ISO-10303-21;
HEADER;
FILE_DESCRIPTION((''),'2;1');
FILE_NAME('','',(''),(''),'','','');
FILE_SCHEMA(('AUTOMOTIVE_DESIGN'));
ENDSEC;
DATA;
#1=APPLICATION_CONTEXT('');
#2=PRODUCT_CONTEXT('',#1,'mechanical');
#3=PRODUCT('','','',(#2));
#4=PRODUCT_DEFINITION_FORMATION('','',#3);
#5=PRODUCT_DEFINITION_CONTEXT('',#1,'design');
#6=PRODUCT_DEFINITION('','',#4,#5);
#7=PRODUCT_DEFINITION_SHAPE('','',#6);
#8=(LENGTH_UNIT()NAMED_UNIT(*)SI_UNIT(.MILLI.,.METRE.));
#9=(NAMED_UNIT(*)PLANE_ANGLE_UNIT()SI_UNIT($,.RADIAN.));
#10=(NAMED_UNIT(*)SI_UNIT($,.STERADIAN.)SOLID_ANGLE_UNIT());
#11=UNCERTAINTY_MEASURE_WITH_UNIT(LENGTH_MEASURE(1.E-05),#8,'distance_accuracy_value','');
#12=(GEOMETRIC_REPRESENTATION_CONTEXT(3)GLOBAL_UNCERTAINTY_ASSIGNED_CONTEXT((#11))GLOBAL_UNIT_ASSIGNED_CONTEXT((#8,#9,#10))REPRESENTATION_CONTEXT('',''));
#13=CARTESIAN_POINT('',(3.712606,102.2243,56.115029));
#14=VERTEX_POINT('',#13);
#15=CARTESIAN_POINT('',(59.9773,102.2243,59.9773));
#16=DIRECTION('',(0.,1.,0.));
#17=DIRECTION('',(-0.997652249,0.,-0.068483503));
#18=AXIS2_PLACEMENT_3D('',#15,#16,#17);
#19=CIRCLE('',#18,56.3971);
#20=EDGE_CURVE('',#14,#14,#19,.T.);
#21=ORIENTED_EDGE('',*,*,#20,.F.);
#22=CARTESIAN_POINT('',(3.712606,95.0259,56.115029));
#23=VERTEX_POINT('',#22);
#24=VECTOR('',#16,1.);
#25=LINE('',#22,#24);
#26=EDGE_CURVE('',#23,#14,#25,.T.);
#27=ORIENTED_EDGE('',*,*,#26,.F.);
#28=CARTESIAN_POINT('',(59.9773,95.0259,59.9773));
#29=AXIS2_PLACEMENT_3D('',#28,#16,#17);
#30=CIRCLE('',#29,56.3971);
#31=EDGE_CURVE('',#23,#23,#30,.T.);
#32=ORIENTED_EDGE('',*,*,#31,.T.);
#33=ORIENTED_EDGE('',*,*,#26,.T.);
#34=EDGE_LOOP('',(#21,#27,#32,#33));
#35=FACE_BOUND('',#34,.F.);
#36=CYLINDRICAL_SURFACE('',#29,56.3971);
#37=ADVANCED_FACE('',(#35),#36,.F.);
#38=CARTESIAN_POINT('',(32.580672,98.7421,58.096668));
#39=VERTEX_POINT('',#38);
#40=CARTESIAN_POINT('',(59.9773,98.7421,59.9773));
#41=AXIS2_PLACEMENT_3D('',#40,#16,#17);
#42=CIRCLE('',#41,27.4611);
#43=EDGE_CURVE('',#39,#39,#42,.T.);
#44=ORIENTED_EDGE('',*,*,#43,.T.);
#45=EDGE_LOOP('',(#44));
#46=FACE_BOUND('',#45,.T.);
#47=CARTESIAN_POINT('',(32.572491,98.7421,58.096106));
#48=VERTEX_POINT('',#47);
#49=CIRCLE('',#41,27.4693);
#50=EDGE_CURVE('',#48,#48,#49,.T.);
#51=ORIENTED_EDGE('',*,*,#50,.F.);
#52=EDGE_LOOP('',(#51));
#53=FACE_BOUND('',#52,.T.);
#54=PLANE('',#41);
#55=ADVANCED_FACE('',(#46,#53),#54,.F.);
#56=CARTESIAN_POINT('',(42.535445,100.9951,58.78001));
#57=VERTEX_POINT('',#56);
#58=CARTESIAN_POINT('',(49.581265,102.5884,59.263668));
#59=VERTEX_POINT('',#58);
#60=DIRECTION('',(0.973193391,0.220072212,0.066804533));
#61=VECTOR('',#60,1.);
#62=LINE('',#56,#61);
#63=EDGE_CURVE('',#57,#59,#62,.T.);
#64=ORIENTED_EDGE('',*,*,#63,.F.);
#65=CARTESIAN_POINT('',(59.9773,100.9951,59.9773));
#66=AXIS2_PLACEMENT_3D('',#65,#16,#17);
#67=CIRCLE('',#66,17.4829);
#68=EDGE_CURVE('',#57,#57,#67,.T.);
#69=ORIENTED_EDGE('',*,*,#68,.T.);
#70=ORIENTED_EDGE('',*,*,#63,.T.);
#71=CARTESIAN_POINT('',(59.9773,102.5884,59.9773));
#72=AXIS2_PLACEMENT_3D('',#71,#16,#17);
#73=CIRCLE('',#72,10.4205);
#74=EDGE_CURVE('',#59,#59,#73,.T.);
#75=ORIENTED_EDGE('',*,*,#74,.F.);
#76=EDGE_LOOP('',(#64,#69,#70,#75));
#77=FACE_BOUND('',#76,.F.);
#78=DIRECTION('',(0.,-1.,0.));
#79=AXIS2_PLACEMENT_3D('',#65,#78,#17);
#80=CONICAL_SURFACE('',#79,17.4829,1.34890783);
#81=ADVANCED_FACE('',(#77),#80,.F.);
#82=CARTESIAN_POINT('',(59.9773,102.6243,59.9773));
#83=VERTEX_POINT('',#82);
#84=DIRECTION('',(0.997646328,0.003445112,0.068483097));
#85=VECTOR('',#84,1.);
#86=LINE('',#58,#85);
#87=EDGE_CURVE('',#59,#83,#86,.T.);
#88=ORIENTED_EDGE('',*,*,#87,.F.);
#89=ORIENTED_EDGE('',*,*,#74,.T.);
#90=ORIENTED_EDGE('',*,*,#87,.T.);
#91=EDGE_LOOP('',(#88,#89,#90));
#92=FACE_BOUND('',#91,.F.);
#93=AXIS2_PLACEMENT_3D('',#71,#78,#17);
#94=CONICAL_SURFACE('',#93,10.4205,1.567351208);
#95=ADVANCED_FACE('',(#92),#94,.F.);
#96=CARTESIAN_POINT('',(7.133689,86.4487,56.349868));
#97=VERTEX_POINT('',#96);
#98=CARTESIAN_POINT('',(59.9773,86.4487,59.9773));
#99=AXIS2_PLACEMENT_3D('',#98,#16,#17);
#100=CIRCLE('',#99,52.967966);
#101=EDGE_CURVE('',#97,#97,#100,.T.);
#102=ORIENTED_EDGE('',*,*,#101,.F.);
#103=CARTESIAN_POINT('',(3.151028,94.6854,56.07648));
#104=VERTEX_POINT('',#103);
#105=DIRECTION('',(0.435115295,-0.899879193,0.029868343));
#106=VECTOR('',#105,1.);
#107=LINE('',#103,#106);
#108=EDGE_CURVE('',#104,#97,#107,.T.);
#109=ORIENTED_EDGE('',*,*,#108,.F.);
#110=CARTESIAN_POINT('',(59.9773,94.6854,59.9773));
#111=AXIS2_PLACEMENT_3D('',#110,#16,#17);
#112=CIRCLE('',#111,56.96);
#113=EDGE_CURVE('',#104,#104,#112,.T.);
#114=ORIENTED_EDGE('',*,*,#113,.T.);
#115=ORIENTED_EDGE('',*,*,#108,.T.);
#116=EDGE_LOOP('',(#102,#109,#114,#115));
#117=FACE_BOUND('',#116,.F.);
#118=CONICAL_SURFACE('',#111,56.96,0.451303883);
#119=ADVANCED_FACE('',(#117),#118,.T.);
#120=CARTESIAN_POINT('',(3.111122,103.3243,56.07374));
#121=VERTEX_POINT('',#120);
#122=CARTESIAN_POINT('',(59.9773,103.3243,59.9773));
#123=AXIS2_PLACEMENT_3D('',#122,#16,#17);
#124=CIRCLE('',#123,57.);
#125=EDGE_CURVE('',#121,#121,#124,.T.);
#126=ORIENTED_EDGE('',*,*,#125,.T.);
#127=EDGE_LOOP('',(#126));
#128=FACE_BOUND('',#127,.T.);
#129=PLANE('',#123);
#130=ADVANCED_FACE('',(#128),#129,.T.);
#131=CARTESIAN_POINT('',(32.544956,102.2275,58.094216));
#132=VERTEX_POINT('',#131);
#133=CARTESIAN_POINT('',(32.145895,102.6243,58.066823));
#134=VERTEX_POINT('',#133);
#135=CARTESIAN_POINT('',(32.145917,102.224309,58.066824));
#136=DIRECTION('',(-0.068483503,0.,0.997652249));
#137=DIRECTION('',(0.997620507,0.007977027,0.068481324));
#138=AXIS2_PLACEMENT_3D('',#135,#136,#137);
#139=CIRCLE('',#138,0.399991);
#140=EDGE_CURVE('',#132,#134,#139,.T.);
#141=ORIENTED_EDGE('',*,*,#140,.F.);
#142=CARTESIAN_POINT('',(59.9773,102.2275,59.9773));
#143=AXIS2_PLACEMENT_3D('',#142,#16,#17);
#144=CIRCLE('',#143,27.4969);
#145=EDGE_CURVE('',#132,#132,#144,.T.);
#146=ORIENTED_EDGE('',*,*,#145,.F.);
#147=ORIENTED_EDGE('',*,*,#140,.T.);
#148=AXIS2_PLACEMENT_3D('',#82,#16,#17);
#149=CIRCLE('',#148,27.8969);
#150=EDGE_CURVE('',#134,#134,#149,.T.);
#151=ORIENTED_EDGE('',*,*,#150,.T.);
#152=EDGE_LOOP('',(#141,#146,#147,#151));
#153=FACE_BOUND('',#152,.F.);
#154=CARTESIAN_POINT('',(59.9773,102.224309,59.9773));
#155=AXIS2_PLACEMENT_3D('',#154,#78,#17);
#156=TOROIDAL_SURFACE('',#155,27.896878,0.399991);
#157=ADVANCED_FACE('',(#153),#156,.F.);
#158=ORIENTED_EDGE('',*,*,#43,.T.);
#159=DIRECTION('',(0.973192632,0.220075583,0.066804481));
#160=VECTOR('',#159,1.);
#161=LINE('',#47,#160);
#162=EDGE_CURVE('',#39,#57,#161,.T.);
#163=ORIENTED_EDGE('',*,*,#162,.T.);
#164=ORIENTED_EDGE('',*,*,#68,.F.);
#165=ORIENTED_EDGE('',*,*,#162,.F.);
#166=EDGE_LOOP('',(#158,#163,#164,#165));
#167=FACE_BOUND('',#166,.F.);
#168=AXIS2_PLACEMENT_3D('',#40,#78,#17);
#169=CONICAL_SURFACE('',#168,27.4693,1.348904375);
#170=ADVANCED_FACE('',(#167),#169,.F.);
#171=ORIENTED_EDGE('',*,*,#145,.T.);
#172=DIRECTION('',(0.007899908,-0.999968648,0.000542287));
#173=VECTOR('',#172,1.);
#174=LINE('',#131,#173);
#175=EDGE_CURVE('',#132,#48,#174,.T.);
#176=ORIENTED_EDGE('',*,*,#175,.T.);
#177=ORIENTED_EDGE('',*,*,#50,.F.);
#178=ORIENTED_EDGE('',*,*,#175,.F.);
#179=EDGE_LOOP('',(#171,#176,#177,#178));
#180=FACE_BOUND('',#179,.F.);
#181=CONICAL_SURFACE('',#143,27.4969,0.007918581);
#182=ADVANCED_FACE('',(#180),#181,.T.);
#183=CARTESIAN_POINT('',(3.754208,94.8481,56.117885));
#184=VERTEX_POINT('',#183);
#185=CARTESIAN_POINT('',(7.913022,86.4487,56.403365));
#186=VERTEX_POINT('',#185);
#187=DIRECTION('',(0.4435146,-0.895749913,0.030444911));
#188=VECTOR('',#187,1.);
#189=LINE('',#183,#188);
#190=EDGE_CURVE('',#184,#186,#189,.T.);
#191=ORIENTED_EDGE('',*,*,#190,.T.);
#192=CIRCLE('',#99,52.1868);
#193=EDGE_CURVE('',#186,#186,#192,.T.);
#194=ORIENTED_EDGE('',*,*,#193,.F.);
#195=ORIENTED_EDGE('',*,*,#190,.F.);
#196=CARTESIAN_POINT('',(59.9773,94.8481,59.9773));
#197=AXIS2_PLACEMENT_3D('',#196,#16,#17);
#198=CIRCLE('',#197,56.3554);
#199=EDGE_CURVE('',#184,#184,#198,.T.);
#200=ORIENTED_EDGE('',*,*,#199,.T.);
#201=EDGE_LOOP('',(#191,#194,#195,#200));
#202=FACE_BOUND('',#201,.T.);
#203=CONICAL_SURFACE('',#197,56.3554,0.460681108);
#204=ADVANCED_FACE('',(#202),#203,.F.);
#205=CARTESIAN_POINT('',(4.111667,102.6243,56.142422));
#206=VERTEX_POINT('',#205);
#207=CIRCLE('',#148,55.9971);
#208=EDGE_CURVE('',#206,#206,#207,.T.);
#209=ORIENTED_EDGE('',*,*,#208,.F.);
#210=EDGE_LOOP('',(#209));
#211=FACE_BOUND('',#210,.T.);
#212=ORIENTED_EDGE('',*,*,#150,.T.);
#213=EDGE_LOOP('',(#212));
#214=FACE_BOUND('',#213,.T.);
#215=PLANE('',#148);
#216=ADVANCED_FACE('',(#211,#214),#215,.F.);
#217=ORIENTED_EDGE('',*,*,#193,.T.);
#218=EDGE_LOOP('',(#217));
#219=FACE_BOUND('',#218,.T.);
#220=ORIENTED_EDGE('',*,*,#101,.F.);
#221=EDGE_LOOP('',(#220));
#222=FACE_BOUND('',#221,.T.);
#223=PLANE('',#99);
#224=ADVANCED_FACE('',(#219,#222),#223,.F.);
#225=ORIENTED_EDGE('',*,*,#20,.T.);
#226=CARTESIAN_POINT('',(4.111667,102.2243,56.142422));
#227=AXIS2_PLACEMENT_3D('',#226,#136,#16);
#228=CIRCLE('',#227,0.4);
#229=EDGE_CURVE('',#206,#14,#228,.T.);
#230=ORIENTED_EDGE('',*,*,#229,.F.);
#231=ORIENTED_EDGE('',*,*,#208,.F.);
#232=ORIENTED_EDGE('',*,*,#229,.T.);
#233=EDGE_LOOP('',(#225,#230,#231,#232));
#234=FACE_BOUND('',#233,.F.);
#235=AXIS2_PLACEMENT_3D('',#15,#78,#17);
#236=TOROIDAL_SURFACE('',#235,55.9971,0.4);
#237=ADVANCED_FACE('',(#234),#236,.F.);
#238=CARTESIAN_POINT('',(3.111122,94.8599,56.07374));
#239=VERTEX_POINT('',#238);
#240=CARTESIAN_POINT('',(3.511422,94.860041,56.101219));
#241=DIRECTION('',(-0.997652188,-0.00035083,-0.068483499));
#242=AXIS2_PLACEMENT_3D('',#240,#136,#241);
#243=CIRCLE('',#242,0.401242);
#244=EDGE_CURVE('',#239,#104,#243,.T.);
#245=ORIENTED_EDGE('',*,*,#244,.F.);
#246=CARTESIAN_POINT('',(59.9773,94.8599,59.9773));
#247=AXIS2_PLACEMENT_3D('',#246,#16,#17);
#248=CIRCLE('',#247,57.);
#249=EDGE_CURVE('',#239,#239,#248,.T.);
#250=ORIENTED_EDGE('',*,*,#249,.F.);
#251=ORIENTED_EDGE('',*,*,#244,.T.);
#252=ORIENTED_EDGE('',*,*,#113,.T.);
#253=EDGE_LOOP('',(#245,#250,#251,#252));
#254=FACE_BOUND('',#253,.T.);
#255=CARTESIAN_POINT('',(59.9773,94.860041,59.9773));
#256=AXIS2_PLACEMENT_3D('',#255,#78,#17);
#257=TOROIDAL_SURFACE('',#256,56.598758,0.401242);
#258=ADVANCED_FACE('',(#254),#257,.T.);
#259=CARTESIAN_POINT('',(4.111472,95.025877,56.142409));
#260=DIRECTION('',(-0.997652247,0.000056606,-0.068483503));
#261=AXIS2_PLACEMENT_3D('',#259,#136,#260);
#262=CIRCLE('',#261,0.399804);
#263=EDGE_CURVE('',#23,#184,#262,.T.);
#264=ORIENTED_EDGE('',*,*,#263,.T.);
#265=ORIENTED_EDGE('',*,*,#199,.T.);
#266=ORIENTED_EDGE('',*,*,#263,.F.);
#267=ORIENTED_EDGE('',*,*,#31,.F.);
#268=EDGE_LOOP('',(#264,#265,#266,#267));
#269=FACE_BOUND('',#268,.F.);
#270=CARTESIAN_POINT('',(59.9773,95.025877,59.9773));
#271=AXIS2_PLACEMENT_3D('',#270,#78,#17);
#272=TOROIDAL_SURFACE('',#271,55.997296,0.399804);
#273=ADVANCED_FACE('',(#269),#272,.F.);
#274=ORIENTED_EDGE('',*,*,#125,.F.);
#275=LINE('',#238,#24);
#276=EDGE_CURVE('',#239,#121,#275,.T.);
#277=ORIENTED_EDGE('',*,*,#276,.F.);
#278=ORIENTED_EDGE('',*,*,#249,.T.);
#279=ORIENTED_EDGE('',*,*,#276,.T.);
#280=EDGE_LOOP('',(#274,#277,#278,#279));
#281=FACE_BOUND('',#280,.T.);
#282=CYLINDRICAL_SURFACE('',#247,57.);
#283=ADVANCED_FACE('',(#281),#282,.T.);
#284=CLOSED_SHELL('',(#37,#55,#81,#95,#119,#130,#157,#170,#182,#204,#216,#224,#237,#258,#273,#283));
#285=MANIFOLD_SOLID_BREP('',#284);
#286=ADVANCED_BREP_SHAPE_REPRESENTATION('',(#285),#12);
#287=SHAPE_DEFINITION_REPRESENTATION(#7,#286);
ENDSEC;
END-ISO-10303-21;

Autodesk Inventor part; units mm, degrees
ref_plane "YZ Plane" through (0, 0, 0) normal (1, 0, 0) x (0, 1, 0)
ref_plane "XZ Plane" through (0, 0, 0) normal (0, 1, 0) x (-1, 0, 0)
ref_plane "XY Plane" through (0, 0, 0) normal (0, 0, 1) x (1, 0, 0)
sketch "Sketch1" plane through (48.8758, 103.3243, 1.0364) normal (0, 1, 0) x (-1, 0, 0)
  circle A0 centre (-11.1015, 58.9409) radius 59.9773 projected
  line L0 (-7.4528, 118.1058) -> (-7.4529, 112.0932) projected
  circle A1 centre (-11.101, 58.953) radius 53.2652 projected
  circle A2 centre (-11.1016, 58.9392) radius 59.279 projected
  line L1 (-13.4524, 112.1664) -> (-13.4524, 118.1716) projected
  point P0 (48.8758, -1.0364)
sketch "Sketch2" plane through (59.9773, 103.3243, 59.9773) normal (0, 1, 0) x (-0.0684835, 0, 0.9976522)
  line L0 (17.4535, -14.1995) -> (19.2244, -11.6906)
  line L1 (-19.2244, -11.6906) -> (-20.6373, -8.964)
  line L2 (1.5354, 22.4475) -> (4.5778, 22.0294)
  ellipse E0 centre (-15.8457, 0.0738) end of major axis (-15.8594, -3.2475) minor radius 3.2638
  ellipse E1 centre (9.6568, 14.831) end of major axis (6.8501, 16.6607) minor radius 3.2778
  ellipse E2 centre (9.8276, -14.769) end of major axis (7.0654, -16.6064) minor radius 3.2452
  circle A0 centre (0, 0) radius 22.4475
  circle A1 centre (0, 0) radius 17.7399
  ellipse E3 centre (17.7399, 0) end of major axis (14.9777, -1.8375) minor radius 3.2452
  point P0 (0, 0)
sketch "HeadSlice" plane through (59.9773, 103.3243, 59.9773) normal (-0.0684835, 0, 0.9976522) x (0.9976522, 0, 0.0684835)
  line L0 (-59.9381, -8.5562) -> (-59.9741, -8.5562) projected
  line L1 (-59.8803, -8.5562) -> (-59.9741, -8.5562) projected
  line L2 (-59.9741, -8.5562) -> (-59.9381, -8.5562) projected
  line L3 (-55.6562, -17.256) -> (-55.6559, -17.256) projected
  line L4 (-55.5803, -17.256) -> (-55.6689, -17.256) projected
  line L5 (-55.6639, -17.256) -> (19.7894, -17.256) projected
  line L6 (20.141, -16.8756) -> (-55.0671, -16.8756) projected
  line L7 (-27.4611, -4.5822) -> (-27.4997, -4.5822) projected
  line L8 (-27.4693, -4.5822) -> (-27.4997, -4.5822) projected
  line L9 (-17.5004, -2.3292) -> (-17.4829, -2.3292) projected
  line L10 (0, -20.7072) -> (0, 3.4512) projected
  line L11 (-52.7836, -17.256) -> (-52.1868, -16.8756)
  line L12 (-56.3971, -8.2984) -> (-56.3971, -1.1)
  line L13 (-27.4969, -1.0968) -> (-27.4693, -4.5822)
  line L14 (-27.4693, -4.5822) -> (-17.4829, -2.3292)
  line L15 (-10.4205, -0.7359) -> (0, -0.7)
  line L16 (-56.96, -8.6389) -> (-52.7836, -17.256)
  line L17 (-27.8969, -0.7) -> (-55.9971, -0.7)
  line L18 (-56.3554, -8.4762) -> (-52.1868, -16.8756)
  line L19 (-57, -8.4644) -> (-57, 0)
  line L20 (-57, 0) -> (2.8803, 0)
  line L21 (0, -0.7) -> (0, 0)
  arc A0 (-55.9971, -0.7) -> (-56.3971, -1.1) centre (-55.9971, -1.1) ccw
  arc A1 (-27.4969, -1.0968) -> (-27.8969, -0.7) centre (-27.8969, -1.1) ccw
  arc A2 (-56.3971, -8.2984) -> (-56.3554, -8.4762) centre (-55.9971, -8.2984) ccw
  arc A3 (-57, -8.4644) -> (-56.96, -8.6389) centre (-56.6, -8.4644) ccw
  line L22 (-57, 0) -> (0, 0)
  line L23 (-17.4829, -2.3292) -> (-10.4205, -0.7359)
  line L24 (-57, 0) -> (0, 0)
  point P0 (-59.2773, -0.7)
  point P1 (-27.5, -0.7)
  point P2 (-52.968, -16.8756)
  point P3 (-52.1868, -16.8756)
  dimension "d6" = 0.4
revolve "Revolution1" add sketch "HeadSlice" angle 360 about axis through (59.9773, 93.3243, 59.9773) along (0, 1, 0) contours L6 L16 A3 L19 L20 L10 L15 L23 L14 L7 L13 A1 L17 A0 L12 A2 L18
extrude "Extrusion1" [suppressed]
properties part number "_3DPrint"
